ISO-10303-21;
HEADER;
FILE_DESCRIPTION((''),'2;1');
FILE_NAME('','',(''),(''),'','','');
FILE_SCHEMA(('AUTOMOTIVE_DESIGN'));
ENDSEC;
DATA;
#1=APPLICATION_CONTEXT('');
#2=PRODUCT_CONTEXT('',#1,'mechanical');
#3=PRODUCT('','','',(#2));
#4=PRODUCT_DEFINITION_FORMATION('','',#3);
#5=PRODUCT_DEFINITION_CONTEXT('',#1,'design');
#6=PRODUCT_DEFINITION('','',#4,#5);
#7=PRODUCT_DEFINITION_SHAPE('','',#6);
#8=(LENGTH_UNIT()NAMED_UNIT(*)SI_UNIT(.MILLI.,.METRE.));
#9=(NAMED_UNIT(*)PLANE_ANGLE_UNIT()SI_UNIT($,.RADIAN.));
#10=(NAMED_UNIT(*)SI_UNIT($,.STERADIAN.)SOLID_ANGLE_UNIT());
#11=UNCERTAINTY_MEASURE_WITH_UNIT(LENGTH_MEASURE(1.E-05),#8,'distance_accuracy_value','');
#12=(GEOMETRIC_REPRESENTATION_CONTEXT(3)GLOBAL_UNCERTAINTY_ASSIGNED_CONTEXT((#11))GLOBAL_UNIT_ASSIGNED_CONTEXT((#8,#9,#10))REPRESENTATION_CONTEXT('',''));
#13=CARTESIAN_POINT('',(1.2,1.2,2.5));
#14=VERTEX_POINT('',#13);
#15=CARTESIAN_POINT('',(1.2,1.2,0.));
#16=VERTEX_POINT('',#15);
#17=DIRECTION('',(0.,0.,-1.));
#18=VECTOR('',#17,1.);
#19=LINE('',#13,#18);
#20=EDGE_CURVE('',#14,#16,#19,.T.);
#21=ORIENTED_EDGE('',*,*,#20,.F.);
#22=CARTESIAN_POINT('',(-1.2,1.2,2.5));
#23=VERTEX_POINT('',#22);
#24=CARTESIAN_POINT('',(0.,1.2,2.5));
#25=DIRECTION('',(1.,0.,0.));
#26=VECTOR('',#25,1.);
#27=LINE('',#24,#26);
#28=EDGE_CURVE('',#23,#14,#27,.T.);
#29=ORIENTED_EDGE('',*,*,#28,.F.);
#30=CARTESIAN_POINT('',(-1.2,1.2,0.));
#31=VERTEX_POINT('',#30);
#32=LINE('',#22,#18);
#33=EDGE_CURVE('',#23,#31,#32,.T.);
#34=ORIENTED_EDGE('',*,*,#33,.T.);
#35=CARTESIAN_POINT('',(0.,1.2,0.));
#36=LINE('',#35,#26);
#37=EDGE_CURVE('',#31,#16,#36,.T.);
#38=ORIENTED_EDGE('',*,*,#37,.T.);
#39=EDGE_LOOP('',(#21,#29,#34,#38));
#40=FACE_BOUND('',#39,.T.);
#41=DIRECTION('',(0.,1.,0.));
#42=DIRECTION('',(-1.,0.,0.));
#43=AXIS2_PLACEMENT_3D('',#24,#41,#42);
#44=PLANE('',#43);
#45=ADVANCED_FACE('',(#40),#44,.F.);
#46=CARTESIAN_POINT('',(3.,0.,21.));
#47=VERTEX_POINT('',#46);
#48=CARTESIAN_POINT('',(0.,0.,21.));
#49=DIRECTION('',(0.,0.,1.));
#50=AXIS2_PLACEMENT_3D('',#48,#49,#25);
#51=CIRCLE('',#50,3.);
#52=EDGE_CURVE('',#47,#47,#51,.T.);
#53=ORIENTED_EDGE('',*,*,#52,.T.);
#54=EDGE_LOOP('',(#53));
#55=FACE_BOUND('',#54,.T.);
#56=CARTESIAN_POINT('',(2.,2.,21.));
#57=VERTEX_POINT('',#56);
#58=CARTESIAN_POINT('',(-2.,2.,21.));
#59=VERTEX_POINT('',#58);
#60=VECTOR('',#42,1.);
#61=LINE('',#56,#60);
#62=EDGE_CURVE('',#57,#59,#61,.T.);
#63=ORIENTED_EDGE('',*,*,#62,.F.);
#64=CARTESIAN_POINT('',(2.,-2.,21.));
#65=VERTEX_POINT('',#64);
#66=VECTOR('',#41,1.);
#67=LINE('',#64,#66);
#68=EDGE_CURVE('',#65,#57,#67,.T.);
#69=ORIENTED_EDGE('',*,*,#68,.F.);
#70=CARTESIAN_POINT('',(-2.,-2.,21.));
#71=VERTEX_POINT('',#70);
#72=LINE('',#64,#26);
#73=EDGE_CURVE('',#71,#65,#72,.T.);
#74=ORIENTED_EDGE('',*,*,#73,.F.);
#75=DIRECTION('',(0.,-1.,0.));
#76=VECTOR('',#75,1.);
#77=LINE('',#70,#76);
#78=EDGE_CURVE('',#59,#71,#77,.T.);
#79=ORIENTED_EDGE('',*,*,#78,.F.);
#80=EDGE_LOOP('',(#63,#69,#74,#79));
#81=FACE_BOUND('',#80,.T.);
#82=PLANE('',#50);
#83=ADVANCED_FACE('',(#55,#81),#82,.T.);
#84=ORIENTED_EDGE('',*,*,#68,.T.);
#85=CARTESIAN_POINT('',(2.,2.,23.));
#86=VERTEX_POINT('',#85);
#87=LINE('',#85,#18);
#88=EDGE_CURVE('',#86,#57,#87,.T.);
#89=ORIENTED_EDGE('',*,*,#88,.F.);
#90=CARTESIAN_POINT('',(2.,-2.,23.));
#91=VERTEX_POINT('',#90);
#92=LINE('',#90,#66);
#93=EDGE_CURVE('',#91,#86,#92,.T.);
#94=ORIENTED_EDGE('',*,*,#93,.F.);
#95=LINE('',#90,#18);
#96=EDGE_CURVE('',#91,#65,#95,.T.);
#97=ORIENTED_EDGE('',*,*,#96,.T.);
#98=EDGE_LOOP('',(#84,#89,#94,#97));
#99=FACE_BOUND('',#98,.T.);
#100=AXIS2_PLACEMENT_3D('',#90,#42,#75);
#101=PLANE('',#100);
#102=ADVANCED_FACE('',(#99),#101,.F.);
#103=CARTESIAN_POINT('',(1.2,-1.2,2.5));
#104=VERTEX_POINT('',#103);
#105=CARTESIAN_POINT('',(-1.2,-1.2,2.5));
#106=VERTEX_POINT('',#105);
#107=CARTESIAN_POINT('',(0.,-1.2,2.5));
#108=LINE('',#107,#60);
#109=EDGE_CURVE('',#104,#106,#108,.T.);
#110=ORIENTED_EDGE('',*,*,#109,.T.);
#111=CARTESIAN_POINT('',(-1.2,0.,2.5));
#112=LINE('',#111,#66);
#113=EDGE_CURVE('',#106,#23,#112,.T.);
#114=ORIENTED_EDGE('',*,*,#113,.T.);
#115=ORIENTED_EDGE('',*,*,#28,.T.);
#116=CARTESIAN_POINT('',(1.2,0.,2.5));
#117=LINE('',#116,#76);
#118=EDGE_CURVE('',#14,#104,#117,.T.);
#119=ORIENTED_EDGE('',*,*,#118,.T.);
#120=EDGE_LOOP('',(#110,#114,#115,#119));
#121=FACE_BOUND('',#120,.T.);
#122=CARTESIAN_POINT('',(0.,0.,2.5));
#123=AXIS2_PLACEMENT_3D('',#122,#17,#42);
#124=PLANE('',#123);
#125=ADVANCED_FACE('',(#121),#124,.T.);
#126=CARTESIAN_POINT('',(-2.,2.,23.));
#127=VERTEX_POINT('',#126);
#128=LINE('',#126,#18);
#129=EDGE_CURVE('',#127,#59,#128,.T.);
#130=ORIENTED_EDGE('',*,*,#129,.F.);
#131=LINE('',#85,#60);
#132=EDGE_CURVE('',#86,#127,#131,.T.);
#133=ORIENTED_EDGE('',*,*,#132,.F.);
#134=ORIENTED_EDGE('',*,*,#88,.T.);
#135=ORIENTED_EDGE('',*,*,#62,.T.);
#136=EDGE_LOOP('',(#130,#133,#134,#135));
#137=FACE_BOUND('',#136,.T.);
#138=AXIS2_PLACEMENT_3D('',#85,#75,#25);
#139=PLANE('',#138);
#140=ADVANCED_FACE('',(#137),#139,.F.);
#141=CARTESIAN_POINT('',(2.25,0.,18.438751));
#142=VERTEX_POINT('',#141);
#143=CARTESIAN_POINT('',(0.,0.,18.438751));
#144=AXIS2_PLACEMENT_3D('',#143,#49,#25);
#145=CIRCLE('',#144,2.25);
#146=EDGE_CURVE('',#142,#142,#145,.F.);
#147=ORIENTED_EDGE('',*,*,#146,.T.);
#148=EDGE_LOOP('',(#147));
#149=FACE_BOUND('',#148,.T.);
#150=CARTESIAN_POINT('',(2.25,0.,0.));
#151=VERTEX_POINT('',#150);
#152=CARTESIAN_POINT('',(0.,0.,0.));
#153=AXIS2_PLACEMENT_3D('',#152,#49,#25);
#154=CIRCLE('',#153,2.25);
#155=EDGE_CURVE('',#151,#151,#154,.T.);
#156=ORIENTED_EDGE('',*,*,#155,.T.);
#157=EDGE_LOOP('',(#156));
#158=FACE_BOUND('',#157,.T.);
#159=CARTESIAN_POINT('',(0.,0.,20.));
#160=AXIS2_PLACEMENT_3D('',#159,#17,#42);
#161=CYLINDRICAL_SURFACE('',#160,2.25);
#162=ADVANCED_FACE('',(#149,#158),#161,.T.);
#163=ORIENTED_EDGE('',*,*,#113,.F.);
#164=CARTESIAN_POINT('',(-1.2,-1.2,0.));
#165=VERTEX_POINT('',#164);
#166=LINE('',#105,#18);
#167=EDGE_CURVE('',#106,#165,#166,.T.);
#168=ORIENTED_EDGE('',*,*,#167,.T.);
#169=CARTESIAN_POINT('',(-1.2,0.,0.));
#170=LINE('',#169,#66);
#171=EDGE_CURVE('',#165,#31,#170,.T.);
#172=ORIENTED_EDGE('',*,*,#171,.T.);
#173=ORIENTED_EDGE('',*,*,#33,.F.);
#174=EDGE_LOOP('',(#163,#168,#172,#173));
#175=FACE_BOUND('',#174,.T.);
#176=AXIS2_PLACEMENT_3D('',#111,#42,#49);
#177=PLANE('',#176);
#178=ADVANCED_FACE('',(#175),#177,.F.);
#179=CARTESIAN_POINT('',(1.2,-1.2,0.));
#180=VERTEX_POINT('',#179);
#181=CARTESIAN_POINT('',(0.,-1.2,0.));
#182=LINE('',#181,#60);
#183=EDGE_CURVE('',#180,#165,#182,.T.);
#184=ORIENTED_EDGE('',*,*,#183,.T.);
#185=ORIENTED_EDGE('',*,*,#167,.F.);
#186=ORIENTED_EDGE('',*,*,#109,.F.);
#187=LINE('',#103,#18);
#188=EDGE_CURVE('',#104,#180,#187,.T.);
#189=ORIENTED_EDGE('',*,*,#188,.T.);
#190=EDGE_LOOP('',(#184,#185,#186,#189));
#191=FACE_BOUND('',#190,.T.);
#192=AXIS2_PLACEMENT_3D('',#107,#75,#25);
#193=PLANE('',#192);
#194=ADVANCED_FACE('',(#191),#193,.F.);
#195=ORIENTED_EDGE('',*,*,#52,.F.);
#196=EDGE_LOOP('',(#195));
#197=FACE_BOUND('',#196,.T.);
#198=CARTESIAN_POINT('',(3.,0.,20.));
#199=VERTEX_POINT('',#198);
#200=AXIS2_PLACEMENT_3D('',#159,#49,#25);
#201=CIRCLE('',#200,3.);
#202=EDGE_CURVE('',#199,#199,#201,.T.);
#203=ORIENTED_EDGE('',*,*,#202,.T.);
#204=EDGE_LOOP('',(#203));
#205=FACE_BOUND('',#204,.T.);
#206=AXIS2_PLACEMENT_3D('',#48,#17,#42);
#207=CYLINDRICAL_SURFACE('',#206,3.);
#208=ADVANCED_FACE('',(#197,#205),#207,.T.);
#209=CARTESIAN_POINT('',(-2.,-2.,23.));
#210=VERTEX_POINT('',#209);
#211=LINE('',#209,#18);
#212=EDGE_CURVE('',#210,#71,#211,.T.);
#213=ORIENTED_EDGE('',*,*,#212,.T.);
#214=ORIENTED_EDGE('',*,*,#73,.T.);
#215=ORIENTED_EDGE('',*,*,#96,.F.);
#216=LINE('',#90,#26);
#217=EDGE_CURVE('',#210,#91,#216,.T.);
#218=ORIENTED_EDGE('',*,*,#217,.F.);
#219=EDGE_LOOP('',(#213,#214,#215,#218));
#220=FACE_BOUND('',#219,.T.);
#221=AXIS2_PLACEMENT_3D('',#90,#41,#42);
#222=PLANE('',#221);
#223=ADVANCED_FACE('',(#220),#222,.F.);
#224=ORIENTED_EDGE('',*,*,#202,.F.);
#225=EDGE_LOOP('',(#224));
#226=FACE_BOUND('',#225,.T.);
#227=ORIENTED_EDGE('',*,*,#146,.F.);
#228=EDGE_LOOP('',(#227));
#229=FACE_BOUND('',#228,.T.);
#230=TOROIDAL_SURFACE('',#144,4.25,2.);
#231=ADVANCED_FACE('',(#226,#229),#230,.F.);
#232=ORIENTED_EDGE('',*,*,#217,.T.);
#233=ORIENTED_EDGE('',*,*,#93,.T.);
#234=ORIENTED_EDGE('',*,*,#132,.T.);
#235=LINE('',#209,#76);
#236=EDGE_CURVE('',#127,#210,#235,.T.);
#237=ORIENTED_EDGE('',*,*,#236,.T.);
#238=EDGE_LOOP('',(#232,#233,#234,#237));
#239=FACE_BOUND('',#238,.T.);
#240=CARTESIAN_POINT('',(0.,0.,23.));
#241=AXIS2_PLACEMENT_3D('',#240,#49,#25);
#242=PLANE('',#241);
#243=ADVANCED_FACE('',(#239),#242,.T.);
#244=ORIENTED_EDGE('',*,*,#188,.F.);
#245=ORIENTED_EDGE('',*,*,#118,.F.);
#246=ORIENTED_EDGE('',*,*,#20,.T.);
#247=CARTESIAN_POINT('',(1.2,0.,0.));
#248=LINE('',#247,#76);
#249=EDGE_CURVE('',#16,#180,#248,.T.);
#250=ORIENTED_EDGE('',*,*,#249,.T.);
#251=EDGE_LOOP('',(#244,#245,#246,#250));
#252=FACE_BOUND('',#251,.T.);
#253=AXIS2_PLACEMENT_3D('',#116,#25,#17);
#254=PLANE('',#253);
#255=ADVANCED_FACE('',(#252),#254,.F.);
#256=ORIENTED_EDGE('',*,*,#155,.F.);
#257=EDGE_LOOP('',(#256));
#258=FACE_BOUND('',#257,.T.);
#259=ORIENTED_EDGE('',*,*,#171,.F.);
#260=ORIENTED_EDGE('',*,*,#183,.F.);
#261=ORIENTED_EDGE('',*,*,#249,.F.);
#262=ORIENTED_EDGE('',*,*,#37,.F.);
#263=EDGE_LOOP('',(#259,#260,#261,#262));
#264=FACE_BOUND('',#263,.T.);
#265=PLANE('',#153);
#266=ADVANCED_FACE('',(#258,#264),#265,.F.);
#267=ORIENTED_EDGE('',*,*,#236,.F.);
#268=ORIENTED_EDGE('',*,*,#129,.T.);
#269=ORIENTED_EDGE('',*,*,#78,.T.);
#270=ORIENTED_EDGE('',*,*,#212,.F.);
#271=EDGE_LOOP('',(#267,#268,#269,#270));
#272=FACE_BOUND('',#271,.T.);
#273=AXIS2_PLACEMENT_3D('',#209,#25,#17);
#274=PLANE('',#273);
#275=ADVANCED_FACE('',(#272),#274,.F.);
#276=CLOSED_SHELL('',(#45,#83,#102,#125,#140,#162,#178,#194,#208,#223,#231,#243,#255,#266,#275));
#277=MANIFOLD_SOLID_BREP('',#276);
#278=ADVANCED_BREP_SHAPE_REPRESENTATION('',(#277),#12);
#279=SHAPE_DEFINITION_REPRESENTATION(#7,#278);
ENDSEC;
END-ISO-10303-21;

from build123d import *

# Parameters (mm, degrees)
SKETCH_1_R          = 2.25
EXTRUDE_2_DEPTH     = 20
SKETCH_7_W          = 2.4
SKETCH_7_H          = 2.4
CUT_EXTRUDE_3_DEPTH = 2.5
SKETCH_9_R          = 3
EXTRUDE_4_DEPTH     = 1
SKETCH_10_W         = 4
SKETCH_10_H         = 4
EXTRUDE_5_DEPTH     = 2
FILLET_1_R          = 2


with BuildPart() as part:
    # 草图1 → 凸台-拉伸2 (new body)
    with BuildSketch(Plane.XY):
        Circle(SKETCH_1_R)
    extrude(amount=EXTRUDE_2_DEPTH)

    # 草图7 → 切除-拉伸3 (cut)
    with BuildSketch(Plane.XY):
        Rectangle(SKETCH_7_W, SKETCH_7_H)
    extrude(amount=CUT_EXTRUDE_3_DEPTH, mode=Mode.SUBTRACT)

    # 草图9 → 凸台-拉伸4 (add)
    with BuildSketch(Plane.XY.offset(20)):
        Circle(SKETCH_9_R)
    extrude(amount=EXTRUDE_4_DEPTH)

    # 草图10 → 凸台-拉伸5 (add)
    with BuildSketch(Plane.XY.offset(21)):
        Rectangle(SKETCH_10_W, SKETCH_10_H)
    extrude(amount=EXTRUDE_5_DEPTH)

    # 圆角1
    # the kernel refuses this fillet: 2 mm, written as the material it adds along each edge
    with BuildSketch(Plane(origin=(0, 0, 20), x_dir=(1, 0, 0), z_dir=(0, -1, 0))) as fillet_1_piece_1:
        with BuildLine():
            CenterArc((4.25, -1.5612495), FILLET_1_R, 128.682187453, 51.317812547)
            Line((2.25, -1.5612495), (2.21, -1.5612495))
            Line((2.21, -1.5612495), (2.21, 0))
            Line((2.21, 0), (2.25, 0.04))
            ThreePointArc((2.25, 0.04), (2.625, 0.04), (2.975, 0.03122499))
            Line((2.975, 0.03122499), (3, 0))
        make_face()
    revolve(axis=Axis((0, 0, 20), (0, 0, 1)))


solid = part.part
